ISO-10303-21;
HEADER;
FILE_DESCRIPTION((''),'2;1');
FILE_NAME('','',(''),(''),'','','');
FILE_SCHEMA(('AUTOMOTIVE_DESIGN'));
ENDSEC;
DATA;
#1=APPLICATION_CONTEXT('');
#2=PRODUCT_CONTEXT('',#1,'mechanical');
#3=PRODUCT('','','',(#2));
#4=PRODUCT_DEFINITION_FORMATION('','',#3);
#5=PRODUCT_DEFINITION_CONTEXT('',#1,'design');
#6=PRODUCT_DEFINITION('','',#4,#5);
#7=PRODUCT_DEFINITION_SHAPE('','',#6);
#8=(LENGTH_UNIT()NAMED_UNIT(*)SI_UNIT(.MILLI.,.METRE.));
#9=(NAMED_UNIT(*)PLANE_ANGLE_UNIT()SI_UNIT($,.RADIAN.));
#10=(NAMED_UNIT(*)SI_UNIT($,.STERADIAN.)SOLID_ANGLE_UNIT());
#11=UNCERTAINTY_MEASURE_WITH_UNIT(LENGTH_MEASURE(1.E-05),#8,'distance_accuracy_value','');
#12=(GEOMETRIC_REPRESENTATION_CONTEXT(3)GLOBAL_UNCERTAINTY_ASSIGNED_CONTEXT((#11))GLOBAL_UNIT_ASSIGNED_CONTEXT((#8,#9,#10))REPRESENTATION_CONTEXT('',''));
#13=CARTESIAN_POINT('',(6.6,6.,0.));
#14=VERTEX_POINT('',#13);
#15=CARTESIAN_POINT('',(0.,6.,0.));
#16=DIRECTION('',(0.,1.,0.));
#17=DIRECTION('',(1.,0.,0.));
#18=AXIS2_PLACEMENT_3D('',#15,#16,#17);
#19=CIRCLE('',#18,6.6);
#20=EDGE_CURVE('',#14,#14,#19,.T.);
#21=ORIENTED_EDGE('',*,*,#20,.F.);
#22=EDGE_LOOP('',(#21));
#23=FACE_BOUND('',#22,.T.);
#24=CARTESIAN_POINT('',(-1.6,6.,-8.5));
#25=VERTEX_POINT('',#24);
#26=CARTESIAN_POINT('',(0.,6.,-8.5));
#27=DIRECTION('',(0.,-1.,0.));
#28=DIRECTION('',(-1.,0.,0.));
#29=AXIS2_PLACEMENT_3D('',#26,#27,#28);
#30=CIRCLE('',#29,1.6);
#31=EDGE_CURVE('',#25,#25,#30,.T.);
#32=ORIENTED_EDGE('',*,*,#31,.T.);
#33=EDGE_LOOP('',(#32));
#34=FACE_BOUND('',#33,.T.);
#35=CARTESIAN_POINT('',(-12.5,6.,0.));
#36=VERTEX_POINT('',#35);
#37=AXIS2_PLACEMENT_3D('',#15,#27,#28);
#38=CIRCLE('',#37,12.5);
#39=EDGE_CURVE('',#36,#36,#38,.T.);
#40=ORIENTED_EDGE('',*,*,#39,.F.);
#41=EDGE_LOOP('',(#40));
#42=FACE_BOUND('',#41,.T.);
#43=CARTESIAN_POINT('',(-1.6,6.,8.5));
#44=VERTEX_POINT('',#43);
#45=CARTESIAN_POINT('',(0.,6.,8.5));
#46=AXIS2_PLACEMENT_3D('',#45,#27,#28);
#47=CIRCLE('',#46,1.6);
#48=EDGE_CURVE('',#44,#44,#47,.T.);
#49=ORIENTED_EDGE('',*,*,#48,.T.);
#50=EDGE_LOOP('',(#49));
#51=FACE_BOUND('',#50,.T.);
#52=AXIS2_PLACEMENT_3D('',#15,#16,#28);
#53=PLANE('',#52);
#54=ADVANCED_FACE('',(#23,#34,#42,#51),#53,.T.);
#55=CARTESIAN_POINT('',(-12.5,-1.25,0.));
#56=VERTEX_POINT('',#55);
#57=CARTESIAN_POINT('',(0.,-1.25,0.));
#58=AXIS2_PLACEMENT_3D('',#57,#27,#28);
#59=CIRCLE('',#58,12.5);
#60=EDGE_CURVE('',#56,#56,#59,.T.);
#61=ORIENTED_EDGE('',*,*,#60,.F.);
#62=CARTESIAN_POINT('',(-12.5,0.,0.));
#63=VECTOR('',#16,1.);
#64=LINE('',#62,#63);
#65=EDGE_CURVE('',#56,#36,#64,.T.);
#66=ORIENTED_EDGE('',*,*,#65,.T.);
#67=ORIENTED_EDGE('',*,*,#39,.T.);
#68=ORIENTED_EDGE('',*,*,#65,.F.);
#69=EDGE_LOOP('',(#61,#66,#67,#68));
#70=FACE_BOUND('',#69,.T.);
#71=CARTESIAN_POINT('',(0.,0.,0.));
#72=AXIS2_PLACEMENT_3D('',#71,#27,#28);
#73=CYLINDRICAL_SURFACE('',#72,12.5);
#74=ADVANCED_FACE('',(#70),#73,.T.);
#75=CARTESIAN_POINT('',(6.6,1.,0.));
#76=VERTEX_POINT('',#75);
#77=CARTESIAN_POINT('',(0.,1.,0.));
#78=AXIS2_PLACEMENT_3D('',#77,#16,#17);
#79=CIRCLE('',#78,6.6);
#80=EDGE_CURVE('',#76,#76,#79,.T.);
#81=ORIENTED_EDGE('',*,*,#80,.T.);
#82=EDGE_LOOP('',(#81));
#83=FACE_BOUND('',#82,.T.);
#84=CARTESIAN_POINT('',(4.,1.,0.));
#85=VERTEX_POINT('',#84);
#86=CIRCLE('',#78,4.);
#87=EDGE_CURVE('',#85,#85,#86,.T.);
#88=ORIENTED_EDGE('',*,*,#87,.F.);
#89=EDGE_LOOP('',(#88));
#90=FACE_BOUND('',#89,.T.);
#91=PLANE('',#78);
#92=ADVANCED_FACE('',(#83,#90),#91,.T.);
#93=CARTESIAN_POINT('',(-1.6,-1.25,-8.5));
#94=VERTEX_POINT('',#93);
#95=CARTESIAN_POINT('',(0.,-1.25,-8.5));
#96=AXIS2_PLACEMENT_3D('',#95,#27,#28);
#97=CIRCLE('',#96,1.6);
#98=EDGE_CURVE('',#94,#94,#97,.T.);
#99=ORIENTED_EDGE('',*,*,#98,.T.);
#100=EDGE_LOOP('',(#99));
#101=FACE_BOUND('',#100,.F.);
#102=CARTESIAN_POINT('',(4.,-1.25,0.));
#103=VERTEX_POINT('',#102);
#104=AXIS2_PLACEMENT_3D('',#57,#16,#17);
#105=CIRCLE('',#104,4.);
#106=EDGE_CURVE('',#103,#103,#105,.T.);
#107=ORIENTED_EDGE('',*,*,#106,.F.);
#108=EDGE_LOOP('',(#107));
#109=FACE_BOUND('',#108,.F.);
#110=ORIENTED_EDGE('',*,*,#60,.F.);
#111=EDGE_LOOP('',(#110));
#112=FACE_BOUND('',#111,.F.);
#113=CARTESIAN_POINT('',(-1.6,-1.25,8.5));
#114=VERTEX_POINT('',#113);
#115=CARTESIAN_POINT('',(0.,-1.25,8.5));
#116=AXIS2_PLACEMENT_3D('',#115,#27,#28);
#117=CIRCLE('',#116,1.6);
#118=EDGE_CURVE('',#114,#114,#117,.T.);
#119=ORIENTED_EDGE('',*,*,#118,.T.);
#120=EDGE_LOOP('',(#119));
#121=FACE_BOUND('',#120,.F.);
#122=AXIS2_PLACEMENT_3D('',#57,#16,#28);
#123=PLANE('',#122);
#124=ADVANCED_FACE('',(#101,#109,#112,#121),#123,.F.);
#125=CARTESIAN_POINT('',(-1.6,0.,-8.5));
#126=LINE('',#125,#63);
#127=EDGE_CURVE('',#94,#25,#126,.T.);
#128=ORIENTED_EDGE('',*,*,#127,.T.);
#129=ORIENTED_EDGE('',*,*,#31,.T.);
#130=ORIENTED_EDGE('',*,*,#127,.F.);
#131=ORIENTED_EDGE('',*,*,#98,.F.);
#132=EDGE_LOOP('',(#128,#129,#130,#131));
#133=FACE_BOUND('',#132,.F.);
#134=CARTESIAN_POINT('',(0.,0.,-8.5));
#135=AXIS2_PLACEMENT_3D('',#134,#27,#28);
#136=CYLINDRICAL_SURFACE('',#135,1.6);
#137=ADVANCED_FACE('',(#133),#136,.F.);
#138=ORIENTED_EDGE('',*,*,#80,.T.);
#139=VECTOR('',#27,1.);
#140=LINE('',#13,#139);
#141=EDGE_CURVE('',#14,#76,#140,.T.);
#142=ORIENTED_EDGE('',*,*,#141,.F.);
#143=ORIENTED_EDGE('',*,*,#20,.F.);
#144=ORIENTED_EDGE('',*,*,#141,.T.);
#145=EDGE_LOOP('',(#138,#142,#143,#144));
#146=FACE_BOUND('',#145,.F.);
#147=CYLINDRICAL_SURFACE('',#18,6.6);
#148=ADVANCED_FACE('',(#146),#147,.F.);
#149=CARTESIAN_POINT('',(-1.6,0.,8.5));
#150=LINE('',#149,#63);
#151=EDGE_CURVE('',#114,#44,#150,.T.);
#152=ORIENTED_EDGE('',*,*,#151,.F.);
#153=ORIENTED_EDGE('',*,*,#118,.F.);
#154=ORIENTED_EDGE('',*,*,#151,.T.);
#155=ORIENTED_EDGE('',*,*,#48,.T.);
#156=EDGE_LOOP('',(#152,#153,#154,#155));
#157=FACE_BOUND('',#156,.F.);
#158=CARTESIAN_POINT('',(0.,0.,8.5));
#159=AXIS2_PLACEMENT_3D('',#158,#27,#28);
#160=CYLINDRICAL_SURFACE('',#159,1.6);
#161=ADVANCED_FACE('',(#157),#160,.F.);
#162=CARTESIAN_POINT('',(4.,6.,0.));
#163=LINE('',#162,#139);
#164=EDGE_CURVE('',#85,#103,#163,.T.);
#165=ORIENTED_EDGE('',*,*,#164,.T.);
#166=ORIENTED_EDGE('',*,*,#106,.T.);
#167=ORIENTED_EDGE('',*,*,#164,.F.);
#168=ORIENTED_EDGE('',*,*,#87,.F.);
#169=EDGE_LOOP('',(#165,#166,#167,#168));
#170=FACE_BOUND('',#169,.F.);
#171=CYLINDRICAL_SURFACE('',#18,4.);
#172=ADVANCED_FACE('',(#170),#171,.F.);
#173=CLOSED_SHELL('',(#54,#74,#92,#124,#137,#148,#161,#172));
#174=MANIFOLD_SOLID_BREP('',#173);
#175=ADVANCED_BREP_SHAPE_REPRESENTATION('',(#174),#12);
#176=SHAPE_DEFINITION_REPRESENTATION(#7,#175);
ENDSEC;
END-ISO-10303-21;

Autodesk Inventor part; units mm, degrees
ref_plane "YZ Plane" through (0, 0, 0) normal (1, 0, 0) x (0, 1, 0)
ref_plane "XZ Plane" through (0, 0, 0) normal (0, 1, 0) x (-1, 0, 0)
ref_plane "XY Plane" through (0, 0, 0) normal (0, 0, 1) x (1, 0, 0)
sketch "草圖1" plane through (0, 0, 0) normal (0, 1, 0) x (-1, 0, 0)
  circle A0 centre (0, 0) radius 12.5
  circle A1 centre (0, 8.5) radius 1.6
  circle A2 centre (0, -8.5) radius 1.6
  dimension "d0" = 25
  dimension "d1" = 17
  dimension "d2" = 8.5
  dimension "d3" = 3.2
  dimension "d4" = 3.2
extrude "擠出1" add sketch "草圖1" along normal blind 6
sketch "草圖2" plane through (0, 6, 0) normal (0, 1, 0) x (1, 0, 0)
  circle A0 centre (0, 0) radius 4
  dimension "d7" = 8
extrude "擠出2" cut sketch "草圖2" against normal through all
sketch "草圖3" plane through (0, 6, 0) normal (0, 1, 0) x (1, 0, 0)
  circle A0 centre (0, 0) radius 6.6
  dimension "d10" = 13.2
extrude "擠出3" cut sketch "草圖3" against normal blind 5
move faces "移動1" translate (0, -1.25, 0) faces at (3.5966, 0, -7.1119)
equation "\"d4\" = d3"
properties part number "wheel_base_cover_print"
